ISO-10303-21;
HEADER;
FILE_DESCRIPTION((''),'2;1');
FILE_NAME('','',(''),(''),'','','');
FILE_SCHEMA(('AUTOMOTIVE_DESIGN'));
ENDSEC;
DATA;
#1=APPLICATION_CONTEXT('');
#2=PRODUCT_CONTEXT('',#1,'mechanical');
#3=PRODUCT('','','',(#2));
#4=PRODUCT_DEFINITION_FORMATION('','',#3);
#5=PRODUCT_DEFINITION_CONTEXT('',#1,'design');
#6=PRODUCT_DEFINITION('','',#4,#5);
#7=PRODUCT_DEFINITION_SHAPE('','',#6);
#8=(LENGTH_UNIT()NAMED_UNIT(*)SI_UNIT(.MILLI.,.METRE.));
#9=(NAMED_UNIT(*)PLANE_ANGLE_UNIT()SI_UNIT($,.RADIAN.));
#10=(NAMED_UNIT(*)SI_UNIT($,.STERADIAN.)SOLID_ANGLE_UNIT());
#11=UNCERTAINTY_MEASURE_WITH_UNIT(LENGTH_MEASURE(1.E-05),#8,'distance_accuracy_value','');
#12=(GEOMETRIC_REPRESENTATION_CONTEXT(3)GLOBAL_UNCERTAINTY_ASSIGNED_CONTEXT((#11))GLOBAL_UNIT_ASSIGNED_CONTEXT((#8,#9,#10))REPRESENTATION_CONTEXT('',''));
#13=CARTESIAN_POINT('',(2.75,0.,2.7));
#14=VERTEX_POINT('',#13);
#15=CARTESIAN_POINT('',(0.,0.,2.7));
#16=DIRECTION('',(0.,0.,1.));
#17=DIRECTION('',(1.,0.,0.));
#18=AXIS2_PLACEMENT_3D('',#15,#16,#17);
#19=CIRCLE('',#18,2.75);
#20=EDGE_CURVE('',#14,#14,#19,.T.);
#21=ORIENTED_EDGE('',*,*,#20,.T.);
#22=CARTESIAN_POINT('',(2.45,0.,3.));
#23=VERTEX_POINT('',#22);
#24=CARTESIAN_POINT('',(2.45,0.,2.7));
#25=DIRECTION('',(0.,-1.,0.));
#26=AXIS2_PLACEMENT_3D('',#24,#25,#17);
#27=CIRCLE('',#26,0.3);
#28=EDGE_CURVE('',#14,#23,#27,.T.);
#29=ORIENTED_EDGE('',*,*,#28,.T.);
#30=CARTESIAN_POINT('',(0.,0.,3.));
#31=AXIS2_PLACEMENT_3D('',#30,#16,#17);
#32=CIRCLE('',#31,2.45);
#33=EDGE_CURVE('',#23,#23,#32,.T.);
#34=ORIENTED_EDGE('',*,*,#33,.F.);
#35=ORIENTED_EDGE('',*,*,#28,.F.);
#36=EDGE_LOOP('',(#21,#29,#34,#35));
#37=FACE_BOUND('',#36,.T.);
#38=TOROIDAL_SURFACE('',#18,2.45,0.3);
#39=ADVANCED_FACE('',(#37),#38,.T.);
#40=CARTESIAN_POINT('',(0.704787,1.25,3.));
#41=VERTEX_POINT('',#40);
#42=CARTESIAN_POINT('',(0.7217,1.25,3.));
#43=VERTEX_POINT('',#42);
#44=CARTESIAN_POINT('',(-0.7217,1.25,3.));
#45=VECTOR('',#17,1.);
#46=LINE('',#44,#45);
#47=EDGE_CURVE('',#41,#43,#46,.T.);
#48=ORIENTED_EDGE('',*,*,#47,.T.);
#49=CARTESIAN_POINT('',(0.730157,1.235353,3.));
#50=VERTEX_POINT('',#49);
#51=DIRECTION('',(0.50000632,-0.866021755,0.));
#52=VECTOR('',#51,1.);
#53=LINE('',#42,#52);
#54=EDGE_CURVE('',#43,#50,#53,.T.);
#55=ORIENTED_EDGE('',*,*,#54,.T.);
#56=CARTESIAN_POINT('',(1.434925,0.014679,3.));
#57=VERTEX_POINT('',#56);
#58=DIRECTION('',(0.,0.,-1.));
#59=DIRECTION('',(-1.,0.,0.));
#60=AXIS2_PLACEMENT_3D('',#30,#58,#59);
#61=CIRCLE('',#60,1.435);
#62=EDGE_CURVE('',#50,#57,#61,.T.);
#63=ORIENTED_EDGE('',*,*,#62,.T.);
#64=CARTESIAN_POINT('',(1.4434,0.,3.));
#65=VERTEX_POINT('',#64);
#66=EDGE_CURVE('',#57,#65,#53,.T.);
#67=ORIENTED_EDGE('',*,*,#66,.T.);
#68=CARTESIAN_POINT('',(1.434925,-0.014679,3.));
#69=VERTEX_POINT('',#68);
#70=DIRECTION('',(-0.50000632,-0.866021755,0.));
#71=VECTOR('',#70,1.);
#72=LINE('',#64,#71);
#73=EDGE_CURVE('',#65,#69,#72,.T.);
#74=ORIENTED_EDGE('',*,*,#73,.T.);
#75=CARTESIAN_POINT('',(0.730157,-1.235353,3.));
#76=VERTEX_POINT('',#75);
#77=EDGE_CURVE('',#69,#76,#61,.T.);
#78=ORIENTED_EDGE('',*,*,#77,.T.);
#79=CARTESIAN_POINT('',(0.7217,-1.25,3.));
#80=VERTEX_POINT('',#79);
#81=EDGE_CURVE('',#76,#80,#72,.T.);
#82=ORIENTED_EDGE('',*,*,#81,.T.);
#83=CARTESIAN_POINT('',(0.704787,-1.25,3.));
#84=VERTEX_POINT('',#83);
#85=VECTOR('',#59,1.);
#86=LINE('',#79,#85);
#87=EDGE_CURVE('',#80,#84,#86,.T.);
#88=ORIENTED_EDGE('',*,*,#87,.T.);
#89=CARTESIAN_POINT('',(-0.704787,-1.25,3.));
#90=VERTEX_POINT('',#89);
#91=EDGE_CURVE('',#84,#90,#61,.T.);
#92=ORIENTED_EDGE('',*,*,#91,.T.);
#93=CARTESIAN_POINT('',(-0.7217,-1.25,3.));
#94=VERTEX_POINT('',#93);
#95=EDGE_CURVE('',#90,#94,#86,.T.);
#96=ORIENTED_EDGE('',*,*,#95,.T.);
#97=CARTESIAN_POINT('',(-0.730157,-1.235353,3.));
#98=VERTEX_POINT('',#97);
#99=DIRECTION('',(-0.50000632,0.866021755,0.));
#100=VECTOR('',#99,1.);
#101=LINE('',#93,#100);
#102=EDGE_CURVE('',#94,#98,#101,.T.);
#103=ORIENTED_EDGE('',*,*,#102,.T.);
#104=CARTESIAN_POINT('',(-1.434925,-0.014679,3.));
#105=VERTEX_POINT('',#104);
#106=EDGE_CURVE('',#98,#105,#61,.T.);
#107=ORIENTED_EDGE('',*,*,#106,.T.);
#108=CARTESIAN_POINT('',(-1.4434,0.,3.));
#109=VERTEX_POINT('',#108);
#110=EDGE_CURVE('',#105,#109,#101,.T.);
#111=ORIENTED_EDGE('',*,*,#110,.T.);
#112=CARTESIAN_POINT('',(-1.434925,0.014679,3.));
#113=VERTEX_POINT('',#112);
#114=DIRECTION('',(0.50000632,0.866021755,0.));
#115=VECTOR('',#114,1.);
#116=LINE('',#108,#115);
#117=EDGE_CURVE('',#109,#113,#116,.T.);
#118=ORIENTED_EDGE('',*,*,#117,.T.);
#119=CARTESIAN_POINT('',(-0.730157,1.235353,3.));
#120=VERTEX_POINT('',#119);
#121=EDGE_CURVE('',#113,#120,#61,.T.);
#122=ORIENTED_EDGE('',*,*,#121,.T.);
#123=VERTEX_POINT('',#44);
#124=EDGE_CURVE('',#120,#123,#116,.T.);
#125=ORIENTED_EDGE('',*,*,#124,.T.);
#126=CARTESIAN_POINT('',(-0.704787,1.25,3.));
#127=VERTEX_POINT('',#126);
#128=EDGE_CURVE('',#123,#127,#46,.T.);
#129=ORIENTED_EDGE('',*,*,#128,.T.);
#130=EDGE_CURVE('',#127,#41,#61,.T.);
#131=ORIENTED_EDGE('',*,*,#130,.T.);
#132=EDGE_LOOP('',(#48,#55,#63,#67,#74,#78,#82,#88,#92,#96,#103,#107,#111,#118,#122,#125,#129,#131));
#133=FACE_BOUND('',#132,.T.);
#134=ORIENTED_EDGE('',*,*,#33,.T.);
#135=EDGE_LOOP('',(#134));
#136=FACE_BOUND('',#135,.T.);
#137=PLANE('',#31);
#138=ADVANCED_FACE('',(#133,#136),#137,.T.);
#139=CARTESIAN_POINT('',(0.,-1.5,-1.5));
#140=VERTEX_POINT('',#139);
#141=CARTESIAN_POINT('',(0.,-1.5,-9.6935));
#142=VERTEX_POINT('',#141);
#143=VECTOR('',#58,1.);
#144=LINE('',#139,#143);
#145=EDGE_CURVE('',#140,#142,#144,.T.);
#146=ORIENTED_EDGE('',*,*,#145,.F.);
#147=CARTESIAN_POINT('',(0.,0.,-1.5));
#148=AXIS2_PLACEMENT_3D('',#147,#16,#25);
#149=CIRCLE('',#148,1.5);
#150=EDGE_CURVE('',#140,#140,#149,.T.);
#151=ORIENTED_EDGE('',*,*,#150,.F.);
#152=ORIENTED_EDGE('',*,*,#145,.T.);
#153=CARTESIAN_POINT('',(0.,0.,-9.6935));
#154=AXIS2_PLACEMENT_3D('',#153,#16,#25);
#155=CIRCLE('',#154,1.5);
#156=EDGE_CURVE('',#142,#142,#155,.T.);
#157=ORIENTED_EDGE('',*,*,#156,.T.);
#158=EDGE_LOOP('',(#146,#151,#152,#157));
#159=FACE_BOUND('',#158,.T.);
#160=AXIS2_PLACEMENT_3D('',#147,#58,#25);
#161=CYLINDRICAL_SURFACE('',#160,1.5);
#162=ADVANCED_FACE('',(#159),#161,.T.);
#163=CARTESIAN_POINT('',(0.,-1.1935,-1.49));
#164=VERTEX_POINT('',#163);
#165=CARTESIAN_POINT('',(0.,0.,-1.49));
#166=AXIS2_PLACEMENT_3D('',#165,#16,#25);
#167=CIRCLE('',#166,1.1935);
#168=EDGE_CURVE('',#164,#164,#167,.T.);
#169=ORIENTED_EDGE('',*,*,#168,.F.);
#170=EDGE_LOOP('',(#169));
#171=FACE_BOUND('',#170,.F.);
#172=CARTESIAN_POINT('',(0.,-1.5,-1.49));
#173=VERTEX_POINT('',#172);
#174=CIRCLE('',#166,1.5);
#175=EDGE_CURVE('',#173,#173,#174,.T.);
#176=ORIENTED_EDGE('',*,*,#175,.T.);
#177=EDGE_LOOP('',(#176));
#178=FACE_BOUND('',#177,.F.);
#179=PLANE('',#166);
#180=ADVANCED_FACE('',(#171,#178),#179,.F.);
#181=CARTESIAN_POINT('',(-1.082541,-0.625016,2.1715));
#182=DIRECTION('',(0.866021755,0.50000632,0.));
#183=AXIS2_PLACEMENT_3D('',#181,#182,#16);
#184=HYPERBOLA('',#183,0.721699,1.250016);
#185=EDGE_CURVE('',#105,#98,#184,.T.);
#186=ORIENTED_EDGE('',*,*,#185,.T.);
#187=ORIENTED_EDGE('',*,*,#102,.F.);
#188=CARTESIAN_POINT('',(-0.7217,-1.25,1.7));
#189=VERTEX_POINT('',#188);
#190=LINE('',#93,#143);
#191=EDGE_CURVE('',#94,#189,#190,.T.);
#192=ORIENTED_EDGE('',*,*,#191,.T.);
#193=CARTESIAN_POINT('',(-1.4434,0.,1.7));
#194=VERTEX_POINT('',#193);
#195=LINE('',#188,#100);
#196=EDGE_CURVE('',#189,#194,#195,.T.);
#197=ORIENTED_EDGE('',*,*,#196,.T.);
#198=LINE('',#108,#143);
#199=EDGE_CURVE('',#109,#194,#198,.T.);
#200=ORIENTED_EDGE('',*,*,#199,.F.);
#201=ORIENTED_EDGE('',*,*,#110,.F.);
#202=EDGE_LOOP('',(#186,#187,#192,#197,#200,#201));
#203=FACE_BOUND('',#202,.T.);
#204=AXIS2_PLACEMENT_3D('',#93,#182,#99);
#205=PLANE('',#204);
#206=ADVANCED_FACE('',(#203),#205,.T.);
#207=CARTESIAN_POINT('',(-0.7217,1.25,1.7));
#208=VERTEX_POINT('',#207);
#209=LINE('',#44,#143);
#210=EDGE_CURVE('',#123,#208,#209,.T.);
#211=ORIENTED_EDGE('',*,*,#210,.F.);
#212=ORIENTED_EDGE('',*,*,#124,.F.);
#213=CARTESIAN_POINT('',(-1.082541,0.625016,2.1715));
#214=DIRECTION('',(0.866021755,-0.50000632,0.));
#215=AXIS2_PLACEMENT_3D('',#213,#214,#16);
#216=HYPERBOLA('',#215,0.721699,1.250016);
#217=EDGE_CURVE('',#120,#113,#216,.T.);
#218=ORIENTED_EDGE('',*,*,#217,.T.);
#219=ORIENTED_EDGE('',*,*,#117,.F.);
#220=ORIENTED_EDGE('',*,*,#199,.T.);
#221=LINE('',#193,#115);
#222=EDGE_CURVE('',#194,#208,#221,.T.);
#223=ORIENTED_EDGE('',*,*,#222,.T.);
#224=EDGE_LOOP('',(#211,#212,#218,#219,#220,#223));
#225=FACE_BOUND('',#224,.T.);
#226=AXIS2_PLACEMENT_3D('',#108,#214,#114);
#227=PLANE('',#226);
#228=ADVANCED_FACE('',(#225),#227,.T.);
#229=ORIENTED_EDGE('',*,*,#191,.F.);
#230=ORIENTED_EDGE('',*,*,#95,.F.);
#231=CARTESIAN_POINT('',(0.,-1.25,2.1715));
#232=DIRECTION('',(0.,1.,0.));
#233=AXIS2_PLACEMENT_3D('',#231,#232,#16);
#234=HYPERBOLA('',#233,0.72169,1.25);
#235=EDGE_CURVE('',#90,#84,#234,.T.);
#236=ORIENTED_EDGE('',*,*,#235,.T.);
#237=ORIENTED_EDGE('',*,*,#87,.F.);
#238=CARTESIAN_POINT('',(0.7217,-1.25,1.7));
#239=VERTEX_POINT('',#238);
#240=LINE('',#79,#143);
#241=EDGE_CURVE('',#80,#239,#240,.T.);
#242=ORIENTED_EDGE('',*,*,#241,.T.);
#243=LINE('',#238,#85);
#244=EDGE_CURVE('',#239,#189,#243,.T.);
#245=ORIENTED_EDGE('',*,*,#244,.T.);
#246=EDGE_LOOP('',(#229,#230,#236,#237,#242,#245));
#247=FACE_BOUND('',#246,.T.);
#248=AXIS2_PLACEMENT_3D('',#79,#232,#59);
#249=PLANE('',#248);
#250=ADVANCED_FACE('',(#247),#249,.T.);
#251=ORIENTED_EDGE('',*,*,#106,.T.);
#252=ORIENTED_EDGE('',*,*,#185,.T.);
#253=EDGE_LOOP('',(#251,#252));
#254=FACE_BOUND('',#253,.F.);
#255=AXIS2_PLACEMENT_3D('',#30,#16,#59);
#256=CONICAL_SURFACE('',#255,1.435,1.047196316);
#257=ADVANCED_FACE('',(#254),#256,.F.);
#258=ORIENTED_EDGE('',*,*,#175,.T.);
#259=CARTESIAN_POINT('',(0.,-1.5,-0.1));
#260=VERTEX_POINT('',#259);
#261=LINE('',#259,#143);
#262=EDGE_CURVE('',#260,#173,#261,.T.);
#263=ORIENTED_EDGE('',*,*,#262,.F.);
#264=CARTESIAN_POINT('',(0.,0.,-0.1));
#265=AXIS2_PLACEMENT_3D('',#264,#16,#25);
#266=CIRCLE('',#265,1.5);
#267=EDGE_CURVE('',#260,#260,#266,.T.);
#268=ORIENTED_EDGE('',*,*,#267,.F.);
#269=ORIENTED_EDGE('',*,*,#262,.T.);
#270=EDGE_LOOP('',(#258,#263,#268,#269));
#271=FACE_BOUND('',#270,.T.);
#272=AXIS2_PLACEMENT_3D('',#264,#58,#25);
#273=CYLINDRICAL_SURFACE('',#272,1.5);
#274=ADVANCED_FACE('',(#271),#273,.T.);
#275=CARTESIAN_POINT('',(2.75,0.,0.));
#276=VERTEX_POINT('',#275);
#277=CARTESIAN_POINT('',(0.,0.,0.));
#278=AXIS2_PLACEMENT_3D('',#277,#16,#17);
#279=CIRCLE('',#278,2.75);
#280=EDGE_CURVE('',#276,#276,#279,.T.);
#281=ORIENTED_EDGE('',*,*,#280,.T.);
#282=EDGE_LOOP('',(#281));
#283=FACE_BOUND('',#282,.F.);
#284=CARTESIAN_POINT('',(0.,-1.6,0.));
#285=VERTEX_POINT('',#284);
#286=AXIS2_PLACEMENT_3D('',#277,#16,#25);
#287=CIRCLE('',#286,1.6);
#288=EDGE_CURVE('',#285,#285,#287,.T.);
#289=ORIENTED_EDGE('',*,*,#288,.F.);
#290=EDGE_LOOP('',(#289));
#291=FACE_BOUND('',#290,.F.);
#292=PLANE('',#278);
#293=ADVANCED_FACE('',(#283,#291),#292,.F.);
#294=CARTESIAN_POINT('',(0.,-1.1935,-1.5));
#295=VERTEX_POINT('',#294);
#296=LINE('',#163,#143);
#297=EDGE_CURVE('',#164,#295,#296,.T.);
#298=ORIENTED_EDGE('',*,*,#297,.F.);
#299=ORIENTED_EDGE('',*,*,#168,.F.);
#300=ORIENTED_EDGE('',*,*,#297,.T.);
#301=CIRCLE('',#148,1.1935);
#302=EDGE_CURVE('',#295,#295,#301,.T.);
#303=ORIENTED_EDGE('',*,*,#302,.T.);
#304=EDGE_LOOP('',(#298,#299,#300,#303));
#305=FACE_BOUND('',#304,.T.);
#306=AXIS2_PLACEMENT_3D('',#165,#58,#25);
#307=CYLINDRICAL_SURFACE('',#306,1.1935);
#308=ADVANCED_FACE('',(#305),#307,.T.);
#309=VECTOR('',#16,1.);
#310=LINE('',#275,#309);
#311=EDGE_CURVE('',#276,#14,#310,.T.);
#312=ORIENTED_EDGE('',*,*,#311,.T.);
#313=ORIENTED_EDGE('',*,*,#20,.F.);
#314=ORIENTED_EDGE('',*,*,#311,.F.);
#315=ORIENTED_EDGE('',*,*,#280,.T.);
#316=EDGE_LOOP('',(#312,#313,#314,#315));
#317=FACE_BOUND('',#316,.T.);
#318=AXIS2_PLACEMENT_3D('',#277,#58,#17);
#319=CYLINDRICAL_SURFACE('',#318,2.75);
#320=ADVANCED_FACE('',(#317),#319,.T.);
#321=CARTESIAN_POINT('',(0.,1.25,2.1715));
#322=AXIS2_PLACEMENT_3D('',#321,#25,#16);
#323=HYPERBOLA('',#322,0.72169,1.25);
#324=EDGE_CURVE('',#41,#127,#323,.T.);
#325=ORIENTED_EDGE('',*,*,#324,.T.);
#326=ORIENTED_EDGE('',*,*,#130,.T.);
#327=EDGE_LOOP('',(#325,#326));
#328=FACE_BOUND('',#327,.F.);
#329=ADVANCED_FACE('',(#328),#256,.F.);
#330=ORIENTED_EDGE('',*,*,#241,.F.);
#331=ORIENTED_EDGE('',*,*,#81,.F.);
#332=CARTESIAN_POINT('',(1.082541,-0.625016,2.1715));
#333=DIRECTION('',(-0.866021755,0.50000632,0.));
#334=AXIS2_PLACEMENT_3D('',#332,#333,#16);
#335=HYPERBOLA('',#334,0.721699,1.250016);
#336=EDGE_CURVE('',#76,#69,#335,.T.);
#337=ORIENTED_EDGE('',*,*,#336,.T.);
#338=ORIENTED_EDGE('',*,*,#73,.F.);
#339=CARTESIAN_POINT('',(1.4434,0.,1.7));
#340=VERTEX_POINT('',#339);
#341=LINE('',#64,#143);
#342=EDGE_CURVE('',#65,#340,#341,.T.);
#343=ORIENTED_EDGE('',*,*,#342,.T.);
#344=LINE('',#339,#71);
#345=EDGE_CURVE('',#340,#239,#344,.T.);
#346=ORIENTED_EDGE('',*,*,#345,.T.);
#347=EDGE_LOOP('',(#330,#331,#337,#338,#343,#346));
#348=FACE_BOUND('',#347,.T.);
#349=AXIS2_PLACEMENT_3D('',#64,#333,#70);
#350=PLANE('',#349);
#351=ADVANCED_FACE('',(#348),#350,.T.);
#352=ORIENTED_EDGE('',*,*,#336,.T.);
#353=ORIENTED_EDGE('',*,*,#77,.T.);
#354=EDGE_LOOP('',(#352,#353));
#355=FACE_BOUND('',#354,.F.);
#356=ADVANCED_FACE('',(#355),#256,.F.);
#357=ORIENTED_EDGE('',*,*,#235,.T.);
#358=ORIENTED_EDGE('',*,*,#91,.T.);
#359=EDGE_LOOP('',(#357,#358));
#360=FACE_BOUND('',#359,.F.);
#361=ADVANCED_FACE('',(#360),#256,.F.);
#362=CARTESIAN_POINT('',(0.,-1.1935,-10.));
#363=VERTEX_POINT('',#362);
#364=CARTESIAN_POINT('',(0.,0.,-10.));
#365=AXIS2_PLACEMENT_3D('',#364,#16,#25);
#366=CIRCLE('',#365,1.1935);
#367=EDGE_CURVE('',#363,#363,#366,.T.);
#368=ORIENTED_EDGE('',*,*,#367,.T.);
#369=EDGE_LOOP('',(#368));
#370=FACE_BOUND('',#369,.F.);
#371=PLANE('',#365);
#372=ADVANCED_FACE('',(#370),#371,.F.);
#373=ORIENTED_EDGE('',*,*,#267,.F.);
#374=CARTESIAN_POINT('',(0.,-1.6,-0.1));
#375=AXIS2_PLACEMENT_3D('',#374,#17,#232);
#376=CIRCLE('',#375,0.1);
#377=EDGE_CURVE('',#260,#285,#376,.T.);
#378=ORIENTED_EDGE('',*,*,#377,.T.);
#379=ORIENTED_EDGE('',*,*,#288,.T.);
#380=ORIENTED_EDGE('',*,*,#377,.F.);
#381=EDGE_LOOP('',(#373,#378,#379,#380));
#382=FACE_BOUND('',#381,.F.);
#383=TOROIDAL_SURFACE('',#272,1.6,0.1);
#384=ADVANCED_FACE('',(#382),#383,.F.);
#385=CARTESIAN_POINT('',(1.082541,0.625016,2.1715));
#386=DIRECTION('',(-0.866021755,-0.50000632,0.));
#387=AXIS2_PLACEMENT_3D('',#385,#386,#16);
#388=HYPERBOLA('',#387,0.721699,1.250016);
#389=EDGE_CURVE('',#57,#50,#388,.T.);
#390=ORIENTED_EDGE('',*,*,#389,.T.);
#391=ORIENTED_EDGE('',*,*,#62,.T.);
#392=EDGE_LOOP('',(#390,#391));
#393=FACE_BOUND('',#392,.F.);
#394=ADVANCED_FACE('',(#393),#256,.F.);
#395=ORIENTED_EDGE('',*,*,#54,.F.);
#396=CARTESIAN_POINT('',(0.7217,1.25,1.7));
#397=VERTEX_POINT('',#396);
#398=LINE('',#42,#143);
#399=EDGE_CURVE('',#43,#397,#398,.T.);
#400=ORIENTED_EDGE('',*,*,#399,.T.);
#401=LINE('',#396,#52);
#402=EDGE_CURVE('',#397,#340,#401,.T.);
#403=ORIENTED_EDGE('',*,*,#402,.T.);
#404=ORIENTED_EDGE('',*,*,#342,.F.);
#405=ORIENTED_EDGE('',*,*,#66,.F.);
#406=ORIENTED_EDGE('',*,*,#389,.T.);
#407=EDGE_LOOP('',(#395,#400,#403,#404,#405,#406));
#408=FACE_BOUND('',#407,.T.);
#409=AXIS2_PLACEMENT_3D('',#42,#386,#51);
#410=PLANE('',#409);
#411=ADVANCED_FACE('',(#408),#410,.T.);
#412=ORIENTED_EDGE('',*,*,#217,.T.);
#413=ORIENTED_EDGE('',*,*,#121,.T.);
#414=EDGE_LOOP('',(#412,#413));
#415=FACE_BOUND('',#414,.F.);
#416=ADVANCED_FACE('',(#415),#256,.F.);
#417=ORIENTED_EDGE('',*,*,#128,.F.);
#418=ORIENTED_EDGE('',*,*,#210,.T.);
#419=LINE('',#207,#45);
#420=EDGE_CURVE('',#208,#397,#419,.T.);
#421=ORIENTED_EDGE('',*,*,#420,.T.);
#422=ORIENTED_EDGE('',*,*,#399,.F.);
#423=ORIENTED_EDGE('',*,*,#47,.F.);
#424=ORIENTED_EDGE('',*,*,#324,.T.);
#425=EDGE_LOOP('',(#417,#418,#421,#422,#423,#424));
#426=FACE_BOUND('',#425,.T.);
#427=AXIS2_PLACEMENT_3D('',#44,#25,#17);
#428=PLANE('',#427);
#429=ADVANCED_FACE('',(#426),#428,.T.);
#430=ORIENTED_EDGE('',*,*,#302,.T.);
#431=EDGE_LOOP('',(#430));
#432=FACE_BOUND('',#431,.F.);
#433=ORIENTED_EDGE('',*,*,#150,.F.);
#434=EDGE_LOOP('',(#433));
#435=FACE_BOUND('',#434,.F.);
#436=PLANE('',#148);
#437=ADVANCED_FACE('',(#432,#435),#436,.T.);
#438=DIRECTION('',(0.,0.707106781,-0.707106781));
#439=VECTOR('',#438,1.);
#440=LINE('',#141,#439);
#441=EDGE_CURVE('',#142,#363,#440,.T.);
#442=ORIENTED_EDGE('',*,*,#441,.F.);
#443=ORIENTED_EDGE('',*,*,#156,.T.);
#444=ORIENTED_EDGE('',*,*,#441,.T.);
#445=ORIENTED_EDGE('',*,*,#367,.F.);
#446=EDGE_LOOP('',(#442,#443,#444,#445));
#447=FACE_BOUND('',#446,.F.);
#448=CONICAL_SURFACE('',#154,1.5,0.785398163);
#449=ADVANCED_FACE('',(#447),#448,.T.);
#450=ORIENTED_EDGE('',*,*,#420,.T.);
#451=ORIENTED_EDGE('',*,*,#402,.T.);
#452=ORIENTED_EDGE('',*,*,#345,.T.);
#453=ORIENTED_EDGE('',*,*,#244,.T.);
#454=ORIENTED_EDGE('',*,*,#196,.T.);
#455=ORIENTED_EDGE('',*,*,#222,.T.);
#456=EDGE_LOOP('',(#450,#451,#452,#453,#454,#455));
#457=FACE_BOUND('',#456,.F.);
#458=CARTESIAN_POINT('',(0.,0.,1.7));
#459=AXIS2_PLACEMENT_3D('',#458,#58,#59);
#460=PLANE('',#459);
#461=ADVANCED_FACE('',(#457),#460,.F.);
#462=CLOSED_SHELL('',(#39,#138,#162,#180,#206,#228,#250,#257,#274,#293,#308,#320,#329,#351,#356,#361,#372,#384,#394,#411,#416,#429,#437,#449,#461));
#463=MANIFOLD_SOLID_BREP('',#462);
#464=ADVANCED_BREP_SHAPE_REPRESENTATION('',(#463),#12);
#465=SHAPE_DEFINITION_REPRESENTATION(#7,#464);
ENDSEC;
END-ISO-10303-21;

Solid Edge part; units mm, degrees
sketch "Sketch1" plane through (0, 0, 0) normal (0, 0, 1) x (1, 0, 0)
  circle A0 centre (0, 0) radius 2.75
extrude "Protrusion1" add sketch "Sketch1" along normal blind 3
sketch "Sketch2" plane through (0, 0, 3) normal (0, 0, 1) x (0, 1, 0)
  line L0 (0, 1.4434) -> (1.25, 0.7217)
  line L1 (1.25, 0.7217) -> (1.25, -0.7217)
  line L2 (1.25, -0.7217) -> (0, -1.4434)
  line L3 (0, -1.4434) -> (-1.25, -0.7217)
  line L4 (-1.25, -0.7217) -> (-1.25, 0.7217)
  line L5 (-1.25, 0.7217) -> (0, 1.4434)
extrude "Cutout1" cut sketch "Sketch2" against normal blind 1.3
fillet "Round1" radius 0.3 1 edges at (-2.75, 0, 3)
sketch "Sketch3" plane through (0, 0, 0) normal (1, 0, 0) x (0, 1, 0)
  line L0 (-1.1935, -10) -> (0, -10)
  line L1 (-1.5, -9.6935) -> (-1.1935, -10)
  line L2 (-1.5, -1.5) -> (-1.5, -9.6935)
  line L3 (-1.1935, -1.5) -> (-1.5, -1.5)
  line L4 (-1.1935, -1.49) -> (-1.1935, -1.5)
  line L5 (-1.5, -1.49) -> (-1.1935, -1.49)
  line L6 (-1.5, -0.1) -> (-1.5, -1.49)
  arc A0 (-1.5, -0.1) -> (-1.6, 0) centre (-1.6, -0.1) ccw
  dimension "D1" = 1.5
  dimension "D2" = 0.01
  dimension "D3" = 0.1
  dimension "D4" = 10
revolve "RevolvedProtrusion1" add sketch "Sketch3" angle 360 about axis through (0, 0, -60.325) along (0, 0, 1) material side at (0, -0.5968, -9.95)
cosmetic_thread "Thread1" size "M3"
sketch "Sketch4" plane through (0, 0, 0) normal (0, -1, 0) x (1, 0, 0)
  line L0 (-1.435, 3) -> (0, 2.1715)
revolve "RevolvedCutout1" cut sketch "Sketch4" angle 360 about axis through (0, 0, 57.15) along (0, 0, -1) material side at (-0.6925, 0, 2.6291)
properties material "Stahl"
